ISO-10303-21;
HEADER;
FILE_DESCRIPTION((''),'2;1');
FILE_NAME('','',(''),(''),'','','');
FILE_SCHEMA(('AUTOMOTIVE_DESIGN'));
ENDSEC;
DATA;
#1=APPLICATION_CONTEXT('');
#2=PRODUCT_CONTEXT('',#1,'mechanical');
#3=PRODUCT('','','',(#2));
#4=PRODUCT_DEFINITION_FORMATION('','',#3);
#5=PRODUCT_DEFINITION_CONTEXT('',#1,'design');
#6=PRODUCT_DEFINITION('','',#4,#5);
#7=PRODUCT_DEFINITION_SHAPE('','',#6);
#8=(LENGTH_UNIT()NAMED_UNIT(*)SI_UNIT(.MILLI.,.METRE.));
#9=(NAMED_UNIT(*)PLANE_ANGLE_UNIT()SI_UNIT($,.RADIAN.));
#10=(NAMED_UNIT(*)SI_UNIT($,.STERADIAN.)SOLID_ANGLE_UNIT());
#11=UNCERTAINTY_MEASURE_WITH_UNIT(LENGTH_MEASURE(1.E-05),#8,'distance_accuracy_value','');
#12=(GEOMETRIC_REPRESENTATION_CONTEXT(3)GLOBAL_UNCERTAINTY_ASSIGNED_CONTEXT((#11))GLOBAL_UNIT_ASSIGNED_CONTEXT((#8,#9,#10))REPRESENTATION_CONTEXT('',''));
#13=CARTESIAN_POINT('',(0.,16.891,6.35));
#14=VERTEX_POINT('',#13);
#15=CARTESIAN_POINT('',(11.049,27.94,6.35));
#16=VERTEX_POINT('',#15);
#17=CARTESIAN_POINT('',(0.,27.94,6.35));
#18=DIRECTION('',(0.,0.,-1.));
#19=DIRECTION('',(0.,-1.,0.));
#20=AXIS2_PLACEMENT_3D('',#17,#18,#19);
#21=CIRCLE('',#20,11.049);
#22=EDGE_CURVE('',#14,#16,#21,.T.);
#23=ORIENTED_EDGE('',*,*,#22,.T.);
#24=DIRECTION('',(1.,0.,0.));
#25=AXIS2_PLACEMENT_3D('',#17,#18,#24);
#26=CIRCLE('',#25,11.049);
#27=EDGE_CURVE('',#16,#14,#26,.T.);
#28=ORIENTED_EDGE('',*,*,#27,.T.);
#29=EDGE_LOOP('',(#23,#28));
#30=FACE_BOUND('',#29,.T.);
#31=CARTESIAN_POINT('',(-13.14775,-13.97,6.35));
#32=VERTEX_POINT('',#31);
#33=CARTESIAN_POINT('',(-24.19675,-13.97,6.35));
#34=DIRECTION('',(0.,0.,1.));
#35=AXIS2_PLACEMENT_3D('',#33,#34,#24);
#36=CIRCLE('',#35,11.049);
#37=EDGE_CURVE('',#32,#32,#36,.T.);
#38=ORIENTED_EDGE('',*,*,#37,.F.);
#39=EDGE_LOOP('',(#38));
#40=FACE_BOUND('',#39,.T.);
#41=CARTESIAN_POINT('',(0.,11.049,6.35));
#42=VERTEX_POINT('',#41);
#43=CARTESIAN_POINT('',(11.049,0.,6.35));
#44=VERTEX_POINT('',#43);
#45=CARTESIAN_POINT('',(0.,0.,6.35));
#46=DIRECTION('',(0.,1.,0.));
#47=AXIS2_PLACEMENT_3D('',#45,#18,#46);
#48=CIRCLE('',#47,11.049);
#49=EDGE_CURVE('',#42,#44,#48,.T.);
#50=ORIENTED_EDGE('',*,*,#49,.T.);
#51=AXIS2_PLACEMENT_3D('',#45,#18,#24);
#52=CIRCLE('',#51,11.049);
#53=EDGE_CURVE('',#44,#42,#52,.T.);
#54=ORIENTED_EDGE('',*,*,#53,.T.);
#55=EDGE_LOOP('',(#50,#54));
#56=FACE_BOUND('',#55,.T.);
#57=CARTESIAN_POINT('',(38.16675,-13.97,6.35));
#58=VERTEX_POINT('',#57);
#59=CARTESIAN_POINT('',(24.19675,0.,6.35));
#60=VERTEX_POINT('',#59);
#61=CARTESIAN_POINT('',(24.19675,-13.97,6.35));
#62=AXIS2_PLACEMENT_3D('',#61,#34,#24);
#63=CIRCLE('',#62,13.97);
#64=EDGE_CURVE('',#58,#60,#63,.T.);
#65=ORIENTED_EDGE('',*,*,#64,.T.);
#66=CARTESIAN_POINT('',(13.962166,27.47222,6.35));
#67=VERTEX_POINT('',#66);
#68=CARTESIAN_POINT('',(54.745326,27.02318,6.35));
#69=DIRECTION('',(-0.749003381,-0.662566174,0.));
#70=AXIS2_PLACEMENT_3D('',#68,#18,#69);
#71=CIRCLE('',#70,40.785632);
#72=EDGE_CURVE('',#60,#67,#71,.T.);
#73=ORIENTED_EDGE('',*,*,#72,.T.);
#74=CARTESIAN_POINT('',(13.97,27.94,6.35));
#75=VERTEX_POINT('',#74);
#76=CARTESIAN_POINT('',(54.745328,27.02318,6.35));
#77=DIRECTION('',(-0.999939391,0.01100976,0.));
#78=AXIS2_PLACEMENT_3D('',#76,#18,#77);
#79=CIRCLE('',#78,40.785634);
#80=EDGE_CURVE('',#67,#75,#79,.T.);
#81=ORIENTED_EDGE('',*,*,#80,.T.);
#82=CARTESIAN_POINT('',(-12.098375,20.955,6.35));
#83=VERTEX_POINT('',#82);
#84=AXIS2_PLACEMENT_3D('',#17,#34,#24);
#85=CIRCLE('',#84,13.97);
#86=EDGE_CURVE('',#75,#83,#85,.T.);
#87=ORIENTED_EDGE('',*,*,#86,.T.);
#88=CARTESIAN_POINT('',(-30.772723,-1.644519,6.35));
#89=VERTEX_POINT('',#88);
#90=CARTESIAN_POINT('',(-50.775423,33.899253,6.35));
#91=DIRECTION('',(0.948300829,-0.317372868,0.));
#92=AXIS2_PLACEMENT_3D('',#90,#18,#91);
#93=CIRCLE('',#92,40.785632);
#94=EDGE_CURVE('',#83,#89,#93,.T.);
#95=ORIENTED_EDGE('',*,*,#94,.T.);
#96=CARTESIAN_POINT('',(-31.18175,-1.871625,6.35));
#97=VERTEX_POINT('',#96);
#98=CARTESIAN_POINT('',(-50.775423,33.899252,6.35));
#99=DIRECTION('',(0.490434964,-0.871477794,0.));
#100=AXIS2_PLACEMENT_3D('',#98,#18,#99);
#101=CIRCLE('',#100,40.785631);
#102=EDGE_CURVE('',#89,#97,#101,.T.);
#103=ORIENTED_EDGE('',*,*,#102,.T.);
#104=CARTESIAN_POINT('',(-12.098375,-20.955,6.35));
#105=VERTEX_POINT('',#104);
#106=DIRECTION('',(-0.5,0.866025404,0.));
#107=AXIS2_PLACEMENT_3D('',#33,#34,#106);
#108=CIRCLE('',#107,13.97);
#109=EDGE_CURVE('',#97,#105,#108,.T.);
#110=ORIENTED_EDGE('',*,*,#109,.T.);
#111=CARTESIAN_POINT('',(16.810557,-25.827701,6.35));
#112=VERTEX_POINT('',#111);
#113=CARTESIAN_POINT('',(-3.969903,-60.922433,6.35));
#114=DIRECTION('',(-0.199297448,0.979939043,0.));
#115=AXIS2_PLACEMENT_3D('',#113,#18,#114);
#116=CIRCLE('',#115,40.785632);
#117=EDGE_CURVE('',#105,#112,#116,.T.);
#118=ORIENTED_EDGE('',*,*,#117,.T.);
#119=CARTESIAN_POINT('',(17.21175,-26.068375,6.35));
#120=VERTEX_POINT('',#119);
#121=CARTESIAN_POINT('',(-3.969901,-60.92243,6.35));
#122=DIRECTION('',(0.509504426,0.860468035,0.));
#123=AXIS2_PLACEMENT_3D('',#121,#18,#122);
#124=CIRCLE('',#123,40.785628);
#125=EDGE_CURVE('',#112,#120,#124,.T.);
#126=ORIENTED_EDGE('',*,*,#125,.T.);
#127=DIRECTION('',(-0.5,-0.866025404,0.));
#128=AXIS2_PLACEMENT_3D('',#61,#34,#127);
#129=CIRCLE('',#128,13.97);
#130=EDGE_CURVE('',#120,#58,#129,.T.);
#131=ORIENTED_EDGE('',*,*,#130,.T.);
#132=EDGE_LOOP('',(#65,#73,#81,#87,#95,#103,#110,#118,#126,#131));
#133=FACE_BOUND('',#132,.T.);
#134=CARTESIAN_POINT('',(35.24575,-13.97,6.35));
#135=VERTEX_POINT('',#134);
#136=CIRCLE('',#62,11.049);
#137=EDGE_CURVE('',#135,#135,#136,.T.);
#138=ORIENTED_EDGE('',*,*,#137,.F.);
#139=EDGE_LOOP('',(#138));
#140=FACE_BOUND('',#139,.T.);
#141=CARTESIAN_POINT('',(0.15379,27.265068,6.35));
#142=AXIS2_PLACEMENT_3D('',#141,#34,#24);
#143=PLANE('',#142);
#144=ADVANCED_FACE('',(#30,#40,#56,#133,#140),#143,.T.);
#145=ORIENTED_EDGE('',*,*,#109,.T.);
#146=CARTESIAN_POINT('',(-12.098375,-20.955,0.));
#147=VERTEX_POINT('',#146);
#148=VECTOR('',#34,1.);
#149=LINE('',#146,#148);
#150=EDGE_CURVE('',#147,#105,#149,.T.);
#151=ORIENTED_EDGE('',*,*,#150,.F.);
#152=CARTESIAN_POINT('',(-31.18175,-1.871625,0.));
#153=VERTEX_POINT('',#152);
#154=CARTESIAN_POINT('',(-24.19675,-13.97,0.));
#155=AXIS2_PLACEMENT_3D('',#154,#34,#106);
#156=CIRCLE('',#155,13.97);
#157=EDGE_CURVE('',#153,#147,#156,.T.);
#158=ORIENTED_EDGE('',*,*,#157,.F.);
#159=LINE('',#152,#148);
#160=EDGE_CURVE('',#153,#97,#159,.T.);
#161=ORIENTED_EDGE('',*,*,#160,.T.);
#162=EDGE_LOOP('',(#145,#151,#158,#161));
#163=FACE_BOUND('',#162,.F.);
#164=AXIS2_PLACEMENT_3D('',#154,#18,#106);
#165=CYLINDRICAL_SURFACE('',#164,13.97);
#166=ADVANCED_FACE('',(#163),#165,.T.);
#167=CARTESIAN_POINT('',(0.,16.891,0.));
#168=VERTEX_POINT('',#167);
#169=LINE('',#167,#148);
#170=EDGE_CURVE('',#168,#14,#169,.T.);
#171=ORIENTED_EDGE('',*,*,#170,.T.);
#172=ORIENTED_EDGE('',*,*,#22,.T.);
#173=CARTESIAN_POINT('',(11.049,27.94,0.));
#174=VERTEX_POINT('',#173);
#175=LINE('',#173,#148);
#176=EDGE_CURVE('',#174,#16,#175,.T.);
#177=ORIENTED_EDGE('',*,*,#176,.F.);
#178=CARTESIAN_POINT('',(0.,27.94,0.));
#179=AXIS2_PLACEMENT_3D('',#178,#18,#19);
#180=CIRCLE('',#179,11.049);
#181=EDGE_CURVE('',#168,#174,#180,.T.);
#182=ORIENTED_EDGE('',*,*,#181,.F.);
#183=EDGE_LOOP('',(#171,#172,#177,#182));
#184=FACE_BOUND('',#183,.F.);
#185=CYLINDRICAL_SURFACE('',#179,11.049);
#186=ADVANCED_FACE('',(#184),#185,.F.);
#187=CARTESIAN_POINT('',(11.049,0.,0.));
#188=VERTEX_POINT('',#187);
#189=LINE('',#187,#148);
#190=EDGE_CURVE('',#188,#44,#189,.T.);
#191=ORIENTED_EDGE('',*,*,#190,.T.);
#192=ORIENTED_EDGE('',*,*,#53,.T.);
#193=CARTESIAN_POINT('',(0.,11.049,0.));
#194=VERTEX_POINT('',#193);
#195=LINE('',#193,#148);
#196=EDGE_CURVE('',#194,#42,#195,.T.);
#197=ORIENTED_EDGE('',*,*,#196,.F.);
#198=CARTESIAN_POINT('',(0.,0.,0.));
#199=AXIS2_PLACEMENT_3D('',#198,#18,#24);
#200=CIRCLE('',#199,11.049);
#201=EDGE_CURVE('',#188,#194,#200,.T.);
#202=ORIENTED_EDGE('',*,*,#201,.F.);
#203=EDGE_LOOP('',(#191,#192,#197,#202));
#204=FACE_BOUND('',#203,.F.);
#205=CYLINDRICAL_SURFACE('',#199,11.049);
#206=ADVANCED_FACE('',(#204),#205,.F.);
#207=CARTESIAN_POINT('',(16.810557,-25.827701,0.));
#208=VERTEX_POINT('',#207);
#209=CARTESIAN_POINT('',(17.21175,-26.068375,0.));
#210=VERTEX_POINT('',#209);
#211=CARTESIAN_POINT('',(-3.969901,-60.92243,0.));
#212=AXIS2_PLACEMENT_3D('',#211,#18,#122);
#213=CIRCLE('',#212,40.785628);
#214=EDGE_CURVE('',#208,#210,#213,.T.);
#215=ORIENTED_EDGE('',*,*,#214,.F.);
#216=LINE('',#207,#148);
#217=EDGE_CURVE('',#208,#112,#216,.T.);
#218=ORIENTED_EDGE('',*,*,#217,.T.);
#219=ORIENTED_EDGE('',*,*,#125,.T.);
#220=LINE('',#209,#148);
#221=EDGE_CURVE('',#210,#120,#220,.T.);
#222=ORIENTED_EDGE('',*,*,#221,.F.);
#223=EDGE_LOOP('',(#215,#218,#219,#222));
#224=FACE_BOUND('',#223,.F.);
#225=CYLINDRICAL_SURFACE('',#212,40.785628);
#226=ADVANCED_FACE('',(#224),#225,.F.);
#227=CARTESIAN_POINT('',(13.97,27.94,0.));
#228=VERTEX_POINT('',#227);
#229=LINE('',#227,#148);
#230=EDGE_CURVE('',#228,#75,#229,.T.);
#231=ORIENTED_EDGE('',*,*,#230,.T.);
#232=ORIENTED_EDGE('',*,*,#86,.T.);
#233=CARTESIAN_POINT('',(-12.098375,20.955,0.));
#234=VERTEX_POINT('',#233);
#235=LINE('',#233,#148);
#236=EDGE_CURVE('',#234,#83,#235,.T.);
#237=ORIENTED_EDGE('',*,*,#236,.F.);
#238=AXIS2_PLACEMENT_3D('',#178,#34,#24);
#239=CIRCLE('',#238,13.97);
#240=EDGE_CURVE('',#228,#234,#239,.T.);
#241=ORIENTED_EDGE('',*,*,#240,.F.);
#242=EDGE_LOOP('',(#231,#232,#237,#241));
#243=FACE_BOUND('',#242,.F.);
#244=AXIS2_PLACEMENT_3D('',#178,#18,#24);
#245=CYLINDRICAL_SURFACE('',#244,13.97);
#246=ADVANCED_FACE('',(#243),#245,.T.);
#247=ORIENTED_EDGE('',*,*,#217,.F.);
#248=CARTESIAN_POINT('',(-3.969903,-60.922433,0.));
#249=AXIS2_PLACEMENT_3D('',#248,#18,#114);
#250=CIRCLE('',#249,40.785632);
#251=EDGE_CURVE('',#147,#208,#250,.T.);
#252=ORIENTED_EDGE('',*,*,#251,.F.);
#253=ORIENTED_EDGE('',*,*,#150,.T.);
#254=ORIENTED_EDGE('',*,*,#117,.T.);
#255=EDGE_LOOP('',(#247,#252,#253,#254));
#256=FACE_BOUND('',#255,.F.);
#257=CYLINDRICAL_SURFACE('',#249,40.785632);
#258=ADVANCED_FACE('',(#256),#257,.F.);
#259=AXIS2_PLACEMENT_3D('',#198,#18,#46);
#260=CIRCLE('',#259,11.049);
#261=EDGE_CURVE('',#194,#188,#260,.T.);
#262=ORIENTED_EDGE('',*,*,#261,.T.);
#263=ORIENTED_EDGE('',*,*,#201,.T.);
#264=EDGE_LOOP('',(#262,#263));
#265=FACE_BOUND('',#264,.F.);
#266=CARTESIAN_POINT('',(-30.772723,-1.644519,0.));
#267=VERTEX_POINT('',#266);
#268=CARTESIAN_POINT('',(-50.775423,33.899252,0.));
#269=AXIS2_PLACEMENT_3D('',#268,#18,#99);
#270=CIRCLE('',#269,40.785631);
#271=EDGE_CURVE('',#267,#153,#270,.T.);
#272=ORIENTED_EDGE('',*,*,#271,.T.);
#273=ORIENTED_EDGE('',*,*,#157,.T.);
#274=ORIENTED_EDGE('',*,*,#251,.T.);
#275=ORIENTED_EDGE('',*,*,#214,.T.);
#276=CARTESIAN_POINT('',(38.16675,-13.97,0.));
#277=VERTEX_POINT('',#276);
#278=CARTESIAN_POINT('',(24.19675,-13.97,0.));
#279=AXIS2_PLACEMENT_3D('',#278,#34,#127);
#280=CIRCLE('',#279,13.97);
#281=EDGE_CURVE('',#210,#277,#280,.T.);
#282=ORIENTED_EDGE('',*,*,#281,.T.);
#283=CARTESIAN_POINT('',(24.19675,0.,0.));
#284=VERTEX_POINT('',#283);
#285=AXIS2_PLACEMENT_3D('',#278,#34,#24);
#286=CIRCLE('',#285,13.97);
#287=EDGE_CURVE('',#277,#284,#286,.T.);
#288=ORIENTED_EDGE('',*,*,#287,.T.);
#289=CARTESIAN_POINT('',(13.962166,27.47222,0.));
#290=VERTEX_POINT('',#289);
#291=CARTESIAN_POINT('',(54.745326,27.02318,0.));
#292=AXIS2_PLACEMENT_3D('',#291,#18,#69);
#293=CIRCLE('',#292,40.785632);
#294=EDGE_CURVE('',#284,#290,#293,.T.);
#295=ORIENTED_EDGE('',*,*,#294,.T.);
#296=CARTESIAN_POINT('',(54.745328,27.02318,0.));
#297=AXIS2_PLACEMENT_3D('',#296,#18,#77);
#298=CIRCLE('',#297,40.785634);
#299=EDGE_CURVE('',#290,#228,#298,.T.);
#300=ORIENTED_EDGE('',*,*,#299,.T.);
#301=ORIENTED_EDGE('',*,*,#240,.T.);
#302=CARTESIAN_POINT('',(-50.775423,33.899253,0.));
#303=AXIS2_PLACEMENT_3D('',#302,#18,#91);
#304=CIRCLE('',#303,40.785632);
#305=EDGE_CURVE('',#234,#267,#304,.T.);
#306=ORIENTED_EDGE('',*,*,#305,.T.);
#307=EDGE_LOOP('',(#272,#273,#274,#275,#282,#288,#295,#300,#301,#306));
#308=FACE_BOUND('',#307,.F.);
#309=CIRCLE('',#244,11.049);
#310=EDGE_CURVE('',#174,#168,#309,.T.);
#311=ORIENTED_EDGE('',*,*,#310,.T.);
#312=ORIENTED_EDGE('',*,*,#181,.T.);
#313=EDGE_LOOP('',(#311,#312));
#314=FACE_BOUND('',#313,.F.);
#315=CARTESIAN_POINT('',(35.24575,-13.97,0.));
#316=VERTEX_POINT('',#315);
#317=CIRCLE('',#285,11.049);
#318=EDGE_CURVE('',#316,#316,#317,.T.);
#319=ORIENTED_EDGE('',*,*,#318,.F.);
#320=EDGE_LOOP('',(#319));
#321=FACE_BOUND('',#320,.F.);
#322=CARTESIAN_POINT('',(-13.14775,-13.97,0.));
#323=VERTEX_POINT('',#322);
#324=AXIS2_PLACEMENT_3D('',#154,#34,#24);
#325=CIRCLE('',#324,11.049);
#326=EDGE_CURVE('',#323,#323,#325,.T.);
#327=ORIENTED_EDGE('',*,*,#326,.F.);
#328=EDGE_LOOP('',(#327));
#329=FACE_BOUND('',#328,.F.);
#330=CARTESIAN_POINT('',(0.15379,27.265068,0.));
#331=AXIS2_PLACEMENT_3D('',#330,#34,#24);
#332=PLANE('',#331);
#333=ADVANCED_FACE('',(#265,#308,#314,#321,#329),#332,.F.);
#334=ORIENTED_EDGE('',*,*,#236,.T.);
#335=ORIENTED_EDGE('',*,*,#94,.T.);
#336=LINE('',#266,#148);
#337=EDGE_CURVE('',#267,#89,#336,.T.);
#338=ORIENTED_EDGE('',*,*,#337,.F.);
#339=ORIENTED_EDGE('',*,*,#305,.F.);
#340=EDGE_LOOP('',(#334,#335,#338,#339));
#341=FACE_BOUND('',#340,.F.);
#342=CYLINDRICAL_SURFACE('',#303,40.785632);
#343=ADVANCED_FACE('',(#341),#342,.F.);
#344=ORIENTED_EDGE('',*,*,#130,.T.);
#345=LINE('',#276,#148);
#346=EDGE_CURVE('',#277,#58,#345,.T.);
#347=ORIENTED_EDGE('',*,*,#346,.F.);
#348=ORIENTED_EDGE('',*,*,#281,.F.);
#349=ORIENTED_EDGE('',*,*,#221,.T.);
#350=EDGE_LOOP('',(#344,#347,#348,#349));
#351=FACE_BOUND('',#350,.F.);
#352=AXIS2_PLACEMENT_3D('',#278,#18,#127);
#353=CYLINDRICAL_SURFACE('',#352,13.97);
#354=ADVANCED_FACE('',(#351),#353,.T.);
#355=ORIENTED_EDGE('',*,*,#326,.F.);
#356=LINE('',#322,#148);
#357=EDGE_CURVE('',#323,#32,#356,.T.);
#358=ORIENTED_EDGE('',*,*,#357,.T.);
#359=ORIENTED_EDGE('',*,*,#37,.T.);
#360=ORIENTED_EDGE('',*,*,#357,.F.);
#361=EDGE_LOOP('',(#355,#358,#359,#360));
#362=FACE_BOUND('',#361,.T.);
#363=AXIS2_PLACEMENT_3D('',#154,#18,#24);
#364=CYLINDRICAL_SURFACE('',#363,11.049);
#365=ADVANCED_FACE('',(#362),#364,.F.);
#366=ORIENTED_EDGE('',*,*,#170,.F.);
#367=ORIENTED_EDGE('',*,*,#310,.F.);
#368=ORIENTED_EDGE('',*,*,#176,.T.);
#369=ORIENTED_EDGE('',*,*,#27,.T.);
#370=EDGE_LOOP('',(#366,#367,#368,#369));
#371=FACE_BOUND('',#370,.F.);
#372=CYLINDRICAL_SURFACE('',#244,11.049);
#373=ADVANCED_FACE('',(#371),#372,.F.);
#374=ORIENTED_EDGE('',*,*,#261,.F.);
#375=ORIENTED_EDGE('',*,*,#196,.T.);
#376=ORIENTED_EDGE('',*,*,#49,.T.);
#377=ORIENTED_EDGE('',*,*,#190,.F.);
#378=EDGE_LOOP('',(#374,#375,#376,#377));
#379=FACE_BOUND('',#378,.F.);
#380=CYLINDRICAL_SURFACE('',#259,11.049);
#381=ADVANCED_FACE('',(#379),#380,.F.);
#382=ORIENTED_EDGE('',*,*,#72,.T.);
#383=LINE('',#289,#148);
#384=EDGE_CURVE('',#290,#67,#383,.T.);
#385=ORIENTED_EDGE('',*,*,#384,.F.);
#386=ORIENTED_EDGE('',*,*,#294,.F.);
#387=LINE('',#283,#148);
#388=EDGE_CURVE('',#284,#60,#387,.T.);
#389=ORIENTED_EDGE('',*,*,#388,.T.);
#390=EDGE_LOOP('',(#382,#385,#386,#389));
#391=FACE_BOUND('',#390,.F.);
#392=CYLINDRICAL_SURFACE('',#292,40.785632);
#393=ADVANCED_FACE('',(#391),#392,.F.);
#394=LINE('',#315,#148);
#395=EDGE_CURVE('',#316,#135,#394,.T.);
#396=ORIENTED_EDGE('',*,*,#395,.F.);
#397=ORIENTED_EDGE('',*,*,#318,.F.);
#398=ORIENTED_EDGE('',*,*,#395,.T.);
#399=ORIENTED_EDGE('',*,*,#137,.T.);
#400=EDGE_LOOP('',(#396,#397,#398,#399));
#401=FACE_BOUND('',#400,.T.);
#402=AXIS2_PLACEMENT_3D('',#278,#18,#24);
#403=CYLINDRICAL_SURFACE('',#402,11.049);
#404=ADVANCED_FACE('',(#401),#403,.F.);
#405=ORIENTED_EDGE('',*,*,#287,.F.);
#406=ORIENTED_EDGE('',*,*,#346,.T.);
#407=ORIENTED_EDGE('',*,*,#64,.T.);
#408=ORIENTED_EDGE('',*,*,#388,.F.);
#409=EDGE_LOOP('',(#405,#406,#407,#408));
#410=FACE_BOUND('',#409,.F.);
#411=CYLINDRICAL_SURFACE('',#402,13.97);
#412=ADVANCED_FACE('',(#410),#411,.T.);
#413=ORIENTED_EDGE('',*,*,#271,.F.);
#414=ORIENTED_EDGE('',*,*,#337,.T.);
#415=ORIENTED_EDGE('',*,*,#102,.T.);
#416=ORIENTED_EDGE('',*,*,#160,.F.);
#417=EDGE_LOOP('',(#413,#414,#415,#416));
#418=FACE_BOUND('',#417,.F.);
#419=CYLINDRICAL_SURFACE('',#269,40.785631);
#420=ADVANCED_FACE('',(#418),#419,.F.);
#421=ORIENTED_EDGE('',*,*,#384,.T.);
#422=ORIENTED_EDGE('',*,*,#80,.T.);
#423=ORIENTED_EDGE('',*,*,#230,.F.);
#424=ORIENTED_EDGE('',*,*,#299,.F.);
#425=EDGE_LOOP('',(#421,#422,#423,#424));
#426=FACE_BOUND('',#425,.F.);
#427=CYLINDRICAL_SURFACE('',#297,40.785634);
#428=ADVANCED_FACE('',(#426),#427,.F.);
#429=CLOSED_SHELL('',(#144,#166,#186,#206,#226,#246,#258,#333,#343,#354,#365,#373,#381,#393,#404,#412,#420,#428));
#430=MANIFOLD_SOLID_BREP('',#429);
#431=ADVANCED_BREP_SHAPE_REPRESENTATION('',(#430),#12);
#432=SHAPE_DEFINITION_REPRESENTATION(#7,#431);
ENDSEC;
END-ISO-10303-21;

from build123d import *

# Parameters (mm, degrees)
F1_R     = 11.049
F2_DEPTH = 6.35


with BuildPart() as f2:
    # F1 (on face) → F2 (new body)
    with BuildSketch(Plane.XY):
        with BuildLine():
            ThreePointArc((13.9621660883, 27.472220007), (13.9654123098, 27.7061212363), (13.97, 27.94))
            ThreePointArc((13.97, 27.94), (-3.6157020601, 41.4339837933), (-12.0983748909, 20.955))
            ThreePointArc((-12.0983748909, 20.955), (-6.9849999951, 15.8416251063), (1.14e-08, 13.97))
            ThreePointArc((1.14e-08, 13.97), (9.7114883941, 17.8976948278), (13.9621660883, 27.472220007))
        make_face()
        with BuildLine():
            ThreePointArc((11.049, 27.94), (7.8128228253, 20.1271771747), (0, 16.891))
            ThreePointArc((0, 16.891), (-7.8128228253, 35.7528228253), (11.049, 27.94))
        make_face(mode=Mode.SUBTRACT)
        with BuildLine():
            ThreePointArc((1.14e-08, 13.97), (-6.9849999951, 15.8416251063), (-12.0983748909, 20.955))
            ThreePointArc((-12.0983748909, 20.955), (-19.3348001595, 7.9193573575), (-30.7727234686, -1.6445194791))
            ThreePointArc((-30.7727234686, -1.6445194791), (-20.3556031034, -0.5384516084), (-12.0983754336, -6.98499906))
            ThreePointArc((-12.0983754336, -6.98499906), (-12.0983746167, 6.9850004749), (1.14e-08, 13.97))
        make_face()
        with BuildLine():
            ThreePointArc((24.1967497817, 0), (16.525764733, 12.7847494365), (13.9621660883, 27.472220007))
            ThreePointArc((13.9621660883, 27.472220007), (9.7114883941, 17.8976948278), (1.14e-08, 13.97))
            ThreePointArc((1.14e-08, 13.97), (9.8782817372, 9.8782817292), (13.97, 0))
            ThreePointArc((13.97, 0), (13.4939839355, -3.6157015292), (12.0983754405, -6.984999048))
            ThreePointArc((12.0983754405, -6.984999048), (17.2117502577, -1.8716248343), (24.1967497817, 0))
        make_face()
        with BuildLine():
            ThreePointArc((13.97, 0), (9.8782817372, 9.8782817292), (1.14e-08, 13.97))
            ThreePointArc((1.14e-08, 13.97), (-12.0983746167, 6.9850004749), (-12.0983754336, -6.98499906))
            ThreePointArc((-12.0983754336, -6.98499906), (6.9e-09, -13.97), (12.0983754405, -6.984999048))
            ThreePointArc((12.0983754405, -6.984999048), (13.4939839355, -3.6157015292), (13.97, 0))
        make_face()
        with BuildLine():
            ThreePointArc((11.049, 0), (-7.8128228253, -7.8128228253), (0, 11.049))
            ThreePointArc((0, 11.049), (7.8128228253, 7.8128228253), (11.049, 0))
        make_face(mode=Mode.SUBTRACT)
        with BuildLine():
            ThreePointArc((-12.0983754336, -6.98499906), (-20.3556031034, -0.5384516084), (-30.7727234686, -1.6445194791))
            ThreePointArc((-30.7727234686, -1.6445194791), (-30.9769109858, -1.7586587835), (-31.1817497817, -1.8716251091))
            ThreePointArc((-31.1817497817, -1.8716251091), (-34.0750315149, -23.8482817332), (-12.0983748909, -20.955))
            ThreePointArc((-12.0983748909, -20.955), (-10.7027659885, -17.5857020601), (-10.2267497817, -13.97))
            ThreePointArc((-10.2267497817, -13.97), (-10.7027661289, -10.3542974157), (-12.0983754336, -6.98499906))
        make_face()
        with Locations((-24.1967497817, -13.97)):
            Circle(F1_R, mode=Mode.SUBTRACT)
        with BuildLine():
            ThreePointArc((38.1667497817, -13.97), (34.0750315149, -4.0917182668), (24.1967497817, 0))
            ThreePointArc((24.1967497817, 0), (17.2117502577, -1.8716248343), (12.0983754405, -6.984999048))
            ThreePointArc((12.0983754405, -6.984999048), (10.6441140583, -17.359242533), (16.8105573802, -25.8277005278))
            ThreePointArc((16.8105573802, -25.8277005278), (17.0114986761, -25.9474624527), (17.2117497817, -26.0683748909))
            ThreePointArc((17.2117497817, -26.0683748909), (31.1817497817, -26.0683748909), (38.1667497817, -13.97))
        make_face()
        with Locations((24.1967497817, -13.97)):
            Circle(F1_R, mode=Mode.SUBTRACT)
        with BuildLine():
            ThreePointArc((12.0983754405, -6.984999048), (6.9e-09, -13.97), (-12.0983754336, -6.98499906))
            ThreePointArc((-12.0983754336, -6.98499906), (-10.7027661289, -10.3542974157), (-10.2267497817, -13.97))
            ThreePointArc((-10.2267497817, -13.97), (-10.7027659885, -17.5857020601), (-12.0983748909, -20.955))
            ThreePointArc((-12.0983748909, -20.955), (2.8090354265, -20.704106794), (16.8105573802, -25.8277005278))
            ThreePointArc((16.8105573802, -25.8277005278), (10.6441140583, -17.359242533), (12.0983754405, -6.984999048))
        make_face()
    extrude(amount=F2_DEPTH)


solid = f2.part
